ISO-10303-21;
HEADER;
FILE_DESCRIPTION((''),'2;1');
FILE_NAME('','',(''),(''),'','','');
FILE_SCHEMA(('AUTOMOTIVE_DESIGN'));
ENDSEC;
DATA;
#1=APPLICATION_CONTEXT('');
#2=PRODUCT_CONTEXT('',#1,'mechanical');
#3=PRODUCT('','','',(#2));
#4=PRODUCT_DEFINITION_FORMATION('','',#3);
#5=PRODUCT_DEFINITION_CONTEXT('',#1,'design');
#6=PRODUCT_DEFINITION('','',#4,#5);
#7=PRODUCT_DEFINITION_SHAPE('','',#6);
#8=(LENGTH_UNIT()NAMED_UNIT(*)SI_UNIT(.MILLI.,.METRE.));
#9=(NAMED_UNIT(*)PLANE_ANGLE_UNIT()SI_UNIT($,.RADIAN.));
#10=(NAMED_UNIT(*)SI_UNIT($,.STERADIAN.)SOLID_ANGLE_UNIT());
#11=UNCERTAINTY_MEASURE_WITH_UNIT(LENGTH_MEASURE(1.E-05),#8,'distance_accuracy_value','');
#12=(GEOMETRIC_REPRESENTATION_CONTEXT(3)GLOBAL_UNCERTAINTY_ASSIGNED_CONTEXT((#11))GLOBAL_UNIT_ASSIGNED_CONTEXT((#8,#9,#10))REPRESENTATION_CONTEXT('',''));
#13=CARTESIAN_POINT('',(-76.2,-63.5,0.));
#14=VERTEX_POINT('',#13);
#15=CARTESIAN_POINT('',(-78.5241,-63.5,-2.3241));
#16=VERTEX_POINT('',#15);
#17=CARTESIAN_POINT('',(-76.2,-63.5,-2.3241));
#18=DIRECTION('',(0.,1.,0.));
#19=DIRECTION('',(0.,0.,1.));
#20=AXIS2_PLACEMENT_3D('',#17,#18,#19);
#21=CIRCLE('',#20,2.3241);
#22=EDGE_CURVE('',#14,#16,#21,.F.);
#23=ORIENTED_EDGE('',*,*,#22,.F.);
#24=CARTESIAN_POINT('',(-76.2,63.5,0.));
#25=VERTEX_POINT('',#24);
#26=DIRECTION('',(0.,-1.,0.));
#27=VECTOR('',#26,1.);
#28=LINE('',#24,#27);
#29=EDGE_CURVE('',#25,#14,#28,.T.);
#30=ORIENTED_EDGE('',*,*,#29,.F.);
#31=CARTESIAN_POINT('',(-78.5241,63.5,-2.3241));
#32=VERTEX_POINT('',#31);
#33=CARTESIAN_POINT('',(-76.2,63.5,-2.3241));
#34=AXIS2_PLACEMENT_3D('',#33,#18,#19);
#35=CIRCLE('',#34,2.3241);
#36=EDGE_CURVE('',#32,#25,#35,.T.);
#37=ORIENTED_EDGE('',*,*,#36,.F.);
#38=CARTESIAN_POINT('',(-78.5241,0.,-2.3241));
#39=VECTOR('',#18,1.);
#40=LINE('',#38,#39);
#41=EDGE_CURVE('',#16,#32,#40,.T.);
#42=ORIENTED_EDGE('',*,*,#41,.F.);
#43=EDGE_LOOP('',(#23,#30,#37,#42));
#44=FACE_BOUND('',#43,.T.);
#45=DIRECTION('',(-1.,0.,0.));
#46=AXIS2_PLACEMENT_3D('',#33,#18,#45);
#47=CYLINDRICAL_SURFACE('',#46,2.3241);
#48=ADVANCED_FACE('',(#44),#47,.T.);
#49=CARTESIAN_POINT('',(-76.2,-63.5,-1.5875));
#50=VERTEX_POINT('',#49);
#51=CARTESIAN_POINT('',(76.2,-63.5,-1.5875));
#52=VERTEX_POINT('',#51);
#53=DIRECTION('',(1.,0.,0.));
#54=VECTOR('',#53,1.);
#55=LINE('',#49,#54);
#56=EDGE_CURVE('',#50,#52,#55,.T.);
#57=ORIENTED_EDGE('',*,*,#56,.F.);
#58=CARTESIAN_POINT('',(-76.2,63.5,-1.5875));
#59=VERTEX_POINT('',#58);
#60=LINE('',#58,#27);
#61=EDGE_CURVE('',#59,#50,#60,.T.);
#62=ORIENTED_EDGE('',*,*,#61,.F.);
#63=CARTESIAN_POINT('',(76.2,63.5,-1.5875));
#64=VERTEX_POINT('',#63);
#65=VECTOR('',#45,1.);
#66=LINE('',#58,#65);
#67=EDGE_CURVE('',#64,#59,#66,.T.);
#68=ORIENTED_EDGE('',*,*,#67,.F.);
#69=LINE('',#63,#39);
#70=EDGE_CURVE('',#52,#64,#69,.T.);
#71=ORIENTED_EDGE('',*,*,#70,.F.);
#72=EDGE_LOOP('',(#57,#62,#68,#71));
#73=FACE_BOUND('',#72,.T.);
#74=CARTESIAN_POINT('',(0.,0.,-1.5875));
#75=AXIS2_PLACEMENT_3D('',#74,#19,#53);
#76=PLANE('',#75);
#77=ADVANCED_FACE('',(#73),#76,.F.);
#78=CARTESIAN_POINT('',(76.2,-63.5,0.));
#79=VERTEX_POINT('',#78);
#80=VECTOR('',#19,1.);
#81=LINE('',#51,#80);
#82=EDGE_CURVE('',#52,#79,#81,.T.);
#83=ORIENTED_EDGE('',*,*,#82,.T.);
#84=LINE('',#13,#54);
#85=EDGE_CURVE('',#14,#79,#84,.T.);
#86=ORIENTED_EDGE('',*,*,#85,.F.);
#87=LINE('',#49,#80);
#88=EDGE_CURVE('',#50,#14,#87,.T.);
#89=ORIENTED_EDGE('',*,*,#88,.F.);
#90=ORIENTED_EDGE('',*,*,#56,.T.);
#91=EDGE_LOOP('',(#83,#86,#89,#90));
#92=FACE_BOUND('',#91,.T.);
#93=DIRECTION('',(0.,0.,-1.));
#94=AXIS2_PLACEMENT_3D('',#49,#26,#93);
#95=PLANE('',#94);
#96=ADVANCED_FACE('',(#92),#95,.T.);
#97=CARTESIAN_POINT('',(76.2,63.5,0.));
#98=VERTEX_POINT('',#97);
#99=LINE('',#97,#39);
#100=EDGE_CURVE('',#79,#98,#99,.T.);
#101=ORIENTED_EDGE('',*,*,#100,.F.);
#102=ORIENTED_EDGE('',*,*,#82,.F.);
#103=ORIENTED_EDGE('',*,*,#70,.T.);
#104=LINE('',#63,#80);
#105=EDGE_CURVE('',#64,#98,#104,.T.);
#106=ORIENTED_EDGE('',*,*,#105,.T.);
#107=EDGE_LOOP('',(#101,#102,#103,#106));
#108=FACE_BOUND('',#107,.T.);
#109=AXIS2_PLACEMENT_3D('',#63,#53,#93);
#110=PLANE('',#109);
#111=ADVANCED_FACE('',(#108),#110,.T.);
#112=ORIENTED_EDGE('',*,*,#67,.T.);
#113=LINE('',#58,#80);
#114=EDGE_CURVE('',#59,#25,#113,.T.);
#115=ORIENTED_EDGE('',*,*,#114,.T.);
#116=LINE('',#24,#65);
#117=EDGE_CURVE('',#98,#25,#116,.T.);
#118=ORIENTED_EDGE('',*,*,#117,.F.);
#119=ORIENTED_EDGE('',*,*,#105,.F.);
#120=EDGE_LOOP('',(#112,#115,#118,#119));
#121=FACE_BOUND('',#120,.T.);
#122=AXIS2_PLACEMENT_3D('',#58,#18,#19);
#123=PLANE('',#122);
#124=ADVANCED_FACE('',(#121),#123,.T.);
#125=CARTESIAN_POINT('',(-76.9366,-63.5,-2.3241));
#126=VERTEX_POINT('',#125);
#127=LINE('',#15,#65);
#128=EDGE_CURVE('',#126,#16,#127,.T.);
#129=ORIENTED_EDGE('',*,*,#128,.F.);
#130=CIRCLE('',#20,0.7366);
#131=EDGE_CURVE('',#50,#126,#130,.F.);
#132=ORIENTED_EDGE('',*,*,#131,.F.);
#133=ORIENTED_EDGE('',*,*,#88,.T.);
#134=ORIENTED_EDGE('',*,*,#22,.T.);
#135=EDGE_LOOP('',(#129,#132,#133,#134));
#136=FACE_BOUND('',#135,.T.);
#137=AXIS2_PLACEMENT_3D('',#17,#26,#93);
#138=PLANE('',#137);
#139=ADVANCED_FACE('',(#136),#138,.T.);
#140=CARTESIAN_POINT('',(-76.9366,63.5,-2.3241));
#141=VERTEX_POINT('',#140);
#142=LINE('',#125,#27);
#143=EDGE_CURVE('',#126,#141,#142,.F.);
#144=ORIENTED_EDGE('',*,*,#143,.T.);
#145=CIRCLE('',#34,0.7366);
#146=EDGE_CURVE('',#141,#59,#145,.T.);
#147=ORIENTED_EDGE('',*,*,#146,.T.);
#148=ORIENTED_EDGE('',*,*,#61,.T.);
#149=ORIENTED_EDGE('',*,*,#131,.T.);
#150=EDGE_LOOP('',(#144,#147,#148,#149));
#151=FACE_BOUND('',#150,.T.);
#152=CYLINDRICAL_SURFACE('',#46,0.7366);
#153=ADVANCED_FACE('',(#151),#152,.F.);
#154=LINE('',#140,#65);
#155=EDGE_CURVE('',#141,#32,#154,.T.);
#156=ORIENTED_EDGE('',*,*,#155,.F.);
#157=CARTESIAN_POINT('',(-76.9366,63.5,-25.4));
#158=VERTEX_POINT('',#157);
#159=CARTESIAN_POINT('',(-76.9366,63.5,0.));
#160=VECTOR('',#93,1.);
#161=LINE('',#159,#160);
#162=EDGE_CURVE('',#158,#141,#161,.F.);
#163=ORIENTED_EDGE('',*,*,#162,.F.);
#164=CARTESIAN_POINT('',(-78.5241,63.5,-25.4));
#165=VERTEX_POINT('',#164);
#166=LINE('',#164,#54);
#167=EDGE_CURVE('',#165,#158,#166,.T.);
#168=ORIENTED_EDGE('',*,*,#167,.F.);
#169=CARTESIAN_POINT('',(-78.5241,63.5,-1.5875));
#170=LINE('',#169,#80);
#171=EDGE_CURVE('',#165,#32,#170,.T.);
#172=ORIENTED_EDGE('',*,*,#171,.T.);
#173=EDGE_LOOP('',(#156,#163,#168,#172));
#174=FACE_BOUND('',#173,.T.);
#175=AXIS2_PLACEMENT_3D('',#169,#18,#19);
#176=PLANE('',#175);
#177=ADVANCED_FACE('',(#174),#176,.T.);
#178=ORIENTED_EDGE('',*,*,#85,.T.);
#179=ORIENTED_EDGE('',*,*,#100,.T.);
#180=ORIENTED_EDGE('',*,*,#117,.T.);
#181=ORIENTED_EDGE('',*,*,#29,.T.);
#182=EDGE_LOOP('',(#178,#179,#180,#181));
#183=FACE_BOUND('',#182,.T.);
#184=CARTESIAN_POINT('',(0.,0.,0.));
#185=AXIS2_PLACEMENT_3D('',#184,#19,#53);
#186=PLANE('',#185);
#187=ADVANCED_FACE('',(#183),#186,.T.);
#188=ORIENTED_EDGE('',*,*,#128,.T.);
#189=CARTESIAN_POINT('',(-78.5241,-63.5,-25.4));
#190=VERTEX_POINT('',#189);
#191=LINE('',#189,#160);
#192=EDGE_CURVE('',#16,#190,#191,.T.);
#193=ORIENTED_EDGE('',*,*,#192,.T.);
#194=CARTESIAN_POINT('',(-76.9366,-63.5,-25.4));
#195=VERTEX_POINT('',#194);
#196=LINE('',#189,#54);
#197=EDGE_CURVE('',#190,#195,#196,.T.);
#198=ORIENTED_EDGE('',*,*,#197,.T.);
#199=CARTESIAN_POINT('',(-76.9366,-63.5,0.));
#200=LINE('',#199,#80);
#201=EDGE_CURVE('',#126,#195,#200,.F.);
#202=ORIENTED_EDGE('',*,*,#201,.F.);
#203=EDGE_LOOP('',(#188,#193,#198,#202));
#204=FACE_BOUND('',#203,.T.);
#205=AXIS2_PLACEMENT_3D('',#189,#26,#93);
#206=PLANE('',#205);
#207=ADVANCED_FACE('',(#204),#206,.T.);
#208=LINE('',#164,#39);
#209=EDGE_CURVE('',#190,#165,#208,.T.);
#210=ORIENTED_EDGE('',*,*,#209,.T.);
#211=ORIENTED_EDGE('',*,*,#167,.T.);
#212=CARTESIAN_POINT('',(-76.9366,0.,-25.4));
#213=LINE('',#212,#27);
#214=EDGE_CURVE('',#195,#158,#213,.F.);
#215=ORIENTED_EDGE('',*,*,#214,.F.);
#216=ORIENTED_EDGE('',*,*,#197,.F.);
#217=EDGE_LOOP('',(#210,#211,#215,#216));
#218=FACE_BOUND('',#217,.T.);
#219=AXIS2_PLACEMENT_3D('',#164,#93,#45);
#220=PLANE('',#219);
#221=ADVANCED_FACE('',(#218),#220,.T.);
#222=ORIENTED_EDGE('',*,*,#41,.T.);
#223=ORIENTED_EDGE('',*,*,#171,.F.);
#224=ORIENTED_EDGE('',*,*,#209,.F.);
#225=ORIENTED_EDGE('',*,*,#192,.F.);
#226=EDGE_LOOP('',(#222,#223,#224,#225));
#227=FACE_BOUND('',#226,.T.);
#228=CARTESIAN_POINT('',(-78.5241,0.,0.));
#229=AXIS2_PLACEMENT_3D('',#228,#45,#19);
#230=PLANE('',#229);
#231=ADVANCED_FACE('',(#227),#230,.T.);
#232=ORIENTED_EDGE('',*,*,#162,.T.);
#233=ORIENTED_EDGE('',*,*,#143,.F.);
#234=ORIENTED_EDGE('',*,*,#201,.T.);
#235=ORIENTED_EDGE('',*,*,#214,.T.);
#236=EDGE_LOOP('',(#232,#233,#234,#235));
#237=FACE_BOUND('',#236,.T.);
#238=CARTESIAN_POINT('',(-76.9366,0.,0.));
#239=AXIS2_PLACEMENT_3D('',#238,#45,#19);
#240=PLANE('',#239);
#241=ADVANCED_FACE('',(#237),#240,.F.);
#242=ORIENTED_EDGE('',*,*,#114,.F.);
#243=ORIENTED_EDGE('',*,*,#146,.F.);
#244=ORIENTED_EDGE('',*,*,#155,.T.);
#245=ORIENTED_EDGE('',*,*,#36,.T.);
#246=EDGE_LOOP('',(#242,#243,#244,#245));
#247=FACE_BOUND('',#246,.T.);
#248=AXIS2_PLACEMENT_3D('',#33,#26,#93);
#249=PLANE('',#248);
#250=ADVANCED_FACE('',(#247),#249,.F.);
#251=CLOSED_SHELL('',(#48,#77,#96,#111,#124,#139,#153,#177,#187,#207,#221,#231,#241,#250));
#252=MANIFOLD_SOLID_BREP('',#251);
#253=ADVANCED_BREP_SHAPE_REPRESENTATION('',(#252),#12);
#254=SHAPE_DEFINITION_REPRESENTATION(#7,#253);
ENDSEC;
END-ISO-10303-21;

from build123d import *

# Parameters (mm, degrees)
SKETCH1_W          = 152.4
SKETCH1_H          = 127
BASE_FLANGE1_DEPTH = 1.5875
EDGE_FLANGE1_DEPTH = 127


# Sheet-metal steps are written as plain solids
with BuildPart() as part:
    # Sketch1 → Base-Flange1 (new body)
    with BuildSketch(Plane.XY):
        Rectangle(SKETCH1_W, SKETCH1_H)
    extrude(amount=-BASE_FLANGE1_DEPTH)

    # Edge-Flange1 section (across the edge) → Edge-Flange1 (add)
    with BuildSketch(Plane(origin=(-76.9366, -63.5, -1.5875), x_dir=(1, 0, 0), z_dir=(0, 1, 0))):
        with BuildLine():
            Line((-1.5875, 0.7366), (-1.5875, 23.8125))
            Line((-1.5875, 23.8125), (0, 23.8125))
            Line((0, 23.8125), (0, 0.7366))
            ThreePointArc((0, 0.7366), (0.215745145, 0.215745145), (0.7366, 0))
            Line((0.7366, 0), (0.7366, -1.5875))
            ThreePointArc((0.7366, -1.5875), (-0.90678687, -0.90678687), (-1.5875, 0.7366))
        make_face()
    extrude(amount=EDGE_FLANGE1_DEPTH)


solid = part.part
